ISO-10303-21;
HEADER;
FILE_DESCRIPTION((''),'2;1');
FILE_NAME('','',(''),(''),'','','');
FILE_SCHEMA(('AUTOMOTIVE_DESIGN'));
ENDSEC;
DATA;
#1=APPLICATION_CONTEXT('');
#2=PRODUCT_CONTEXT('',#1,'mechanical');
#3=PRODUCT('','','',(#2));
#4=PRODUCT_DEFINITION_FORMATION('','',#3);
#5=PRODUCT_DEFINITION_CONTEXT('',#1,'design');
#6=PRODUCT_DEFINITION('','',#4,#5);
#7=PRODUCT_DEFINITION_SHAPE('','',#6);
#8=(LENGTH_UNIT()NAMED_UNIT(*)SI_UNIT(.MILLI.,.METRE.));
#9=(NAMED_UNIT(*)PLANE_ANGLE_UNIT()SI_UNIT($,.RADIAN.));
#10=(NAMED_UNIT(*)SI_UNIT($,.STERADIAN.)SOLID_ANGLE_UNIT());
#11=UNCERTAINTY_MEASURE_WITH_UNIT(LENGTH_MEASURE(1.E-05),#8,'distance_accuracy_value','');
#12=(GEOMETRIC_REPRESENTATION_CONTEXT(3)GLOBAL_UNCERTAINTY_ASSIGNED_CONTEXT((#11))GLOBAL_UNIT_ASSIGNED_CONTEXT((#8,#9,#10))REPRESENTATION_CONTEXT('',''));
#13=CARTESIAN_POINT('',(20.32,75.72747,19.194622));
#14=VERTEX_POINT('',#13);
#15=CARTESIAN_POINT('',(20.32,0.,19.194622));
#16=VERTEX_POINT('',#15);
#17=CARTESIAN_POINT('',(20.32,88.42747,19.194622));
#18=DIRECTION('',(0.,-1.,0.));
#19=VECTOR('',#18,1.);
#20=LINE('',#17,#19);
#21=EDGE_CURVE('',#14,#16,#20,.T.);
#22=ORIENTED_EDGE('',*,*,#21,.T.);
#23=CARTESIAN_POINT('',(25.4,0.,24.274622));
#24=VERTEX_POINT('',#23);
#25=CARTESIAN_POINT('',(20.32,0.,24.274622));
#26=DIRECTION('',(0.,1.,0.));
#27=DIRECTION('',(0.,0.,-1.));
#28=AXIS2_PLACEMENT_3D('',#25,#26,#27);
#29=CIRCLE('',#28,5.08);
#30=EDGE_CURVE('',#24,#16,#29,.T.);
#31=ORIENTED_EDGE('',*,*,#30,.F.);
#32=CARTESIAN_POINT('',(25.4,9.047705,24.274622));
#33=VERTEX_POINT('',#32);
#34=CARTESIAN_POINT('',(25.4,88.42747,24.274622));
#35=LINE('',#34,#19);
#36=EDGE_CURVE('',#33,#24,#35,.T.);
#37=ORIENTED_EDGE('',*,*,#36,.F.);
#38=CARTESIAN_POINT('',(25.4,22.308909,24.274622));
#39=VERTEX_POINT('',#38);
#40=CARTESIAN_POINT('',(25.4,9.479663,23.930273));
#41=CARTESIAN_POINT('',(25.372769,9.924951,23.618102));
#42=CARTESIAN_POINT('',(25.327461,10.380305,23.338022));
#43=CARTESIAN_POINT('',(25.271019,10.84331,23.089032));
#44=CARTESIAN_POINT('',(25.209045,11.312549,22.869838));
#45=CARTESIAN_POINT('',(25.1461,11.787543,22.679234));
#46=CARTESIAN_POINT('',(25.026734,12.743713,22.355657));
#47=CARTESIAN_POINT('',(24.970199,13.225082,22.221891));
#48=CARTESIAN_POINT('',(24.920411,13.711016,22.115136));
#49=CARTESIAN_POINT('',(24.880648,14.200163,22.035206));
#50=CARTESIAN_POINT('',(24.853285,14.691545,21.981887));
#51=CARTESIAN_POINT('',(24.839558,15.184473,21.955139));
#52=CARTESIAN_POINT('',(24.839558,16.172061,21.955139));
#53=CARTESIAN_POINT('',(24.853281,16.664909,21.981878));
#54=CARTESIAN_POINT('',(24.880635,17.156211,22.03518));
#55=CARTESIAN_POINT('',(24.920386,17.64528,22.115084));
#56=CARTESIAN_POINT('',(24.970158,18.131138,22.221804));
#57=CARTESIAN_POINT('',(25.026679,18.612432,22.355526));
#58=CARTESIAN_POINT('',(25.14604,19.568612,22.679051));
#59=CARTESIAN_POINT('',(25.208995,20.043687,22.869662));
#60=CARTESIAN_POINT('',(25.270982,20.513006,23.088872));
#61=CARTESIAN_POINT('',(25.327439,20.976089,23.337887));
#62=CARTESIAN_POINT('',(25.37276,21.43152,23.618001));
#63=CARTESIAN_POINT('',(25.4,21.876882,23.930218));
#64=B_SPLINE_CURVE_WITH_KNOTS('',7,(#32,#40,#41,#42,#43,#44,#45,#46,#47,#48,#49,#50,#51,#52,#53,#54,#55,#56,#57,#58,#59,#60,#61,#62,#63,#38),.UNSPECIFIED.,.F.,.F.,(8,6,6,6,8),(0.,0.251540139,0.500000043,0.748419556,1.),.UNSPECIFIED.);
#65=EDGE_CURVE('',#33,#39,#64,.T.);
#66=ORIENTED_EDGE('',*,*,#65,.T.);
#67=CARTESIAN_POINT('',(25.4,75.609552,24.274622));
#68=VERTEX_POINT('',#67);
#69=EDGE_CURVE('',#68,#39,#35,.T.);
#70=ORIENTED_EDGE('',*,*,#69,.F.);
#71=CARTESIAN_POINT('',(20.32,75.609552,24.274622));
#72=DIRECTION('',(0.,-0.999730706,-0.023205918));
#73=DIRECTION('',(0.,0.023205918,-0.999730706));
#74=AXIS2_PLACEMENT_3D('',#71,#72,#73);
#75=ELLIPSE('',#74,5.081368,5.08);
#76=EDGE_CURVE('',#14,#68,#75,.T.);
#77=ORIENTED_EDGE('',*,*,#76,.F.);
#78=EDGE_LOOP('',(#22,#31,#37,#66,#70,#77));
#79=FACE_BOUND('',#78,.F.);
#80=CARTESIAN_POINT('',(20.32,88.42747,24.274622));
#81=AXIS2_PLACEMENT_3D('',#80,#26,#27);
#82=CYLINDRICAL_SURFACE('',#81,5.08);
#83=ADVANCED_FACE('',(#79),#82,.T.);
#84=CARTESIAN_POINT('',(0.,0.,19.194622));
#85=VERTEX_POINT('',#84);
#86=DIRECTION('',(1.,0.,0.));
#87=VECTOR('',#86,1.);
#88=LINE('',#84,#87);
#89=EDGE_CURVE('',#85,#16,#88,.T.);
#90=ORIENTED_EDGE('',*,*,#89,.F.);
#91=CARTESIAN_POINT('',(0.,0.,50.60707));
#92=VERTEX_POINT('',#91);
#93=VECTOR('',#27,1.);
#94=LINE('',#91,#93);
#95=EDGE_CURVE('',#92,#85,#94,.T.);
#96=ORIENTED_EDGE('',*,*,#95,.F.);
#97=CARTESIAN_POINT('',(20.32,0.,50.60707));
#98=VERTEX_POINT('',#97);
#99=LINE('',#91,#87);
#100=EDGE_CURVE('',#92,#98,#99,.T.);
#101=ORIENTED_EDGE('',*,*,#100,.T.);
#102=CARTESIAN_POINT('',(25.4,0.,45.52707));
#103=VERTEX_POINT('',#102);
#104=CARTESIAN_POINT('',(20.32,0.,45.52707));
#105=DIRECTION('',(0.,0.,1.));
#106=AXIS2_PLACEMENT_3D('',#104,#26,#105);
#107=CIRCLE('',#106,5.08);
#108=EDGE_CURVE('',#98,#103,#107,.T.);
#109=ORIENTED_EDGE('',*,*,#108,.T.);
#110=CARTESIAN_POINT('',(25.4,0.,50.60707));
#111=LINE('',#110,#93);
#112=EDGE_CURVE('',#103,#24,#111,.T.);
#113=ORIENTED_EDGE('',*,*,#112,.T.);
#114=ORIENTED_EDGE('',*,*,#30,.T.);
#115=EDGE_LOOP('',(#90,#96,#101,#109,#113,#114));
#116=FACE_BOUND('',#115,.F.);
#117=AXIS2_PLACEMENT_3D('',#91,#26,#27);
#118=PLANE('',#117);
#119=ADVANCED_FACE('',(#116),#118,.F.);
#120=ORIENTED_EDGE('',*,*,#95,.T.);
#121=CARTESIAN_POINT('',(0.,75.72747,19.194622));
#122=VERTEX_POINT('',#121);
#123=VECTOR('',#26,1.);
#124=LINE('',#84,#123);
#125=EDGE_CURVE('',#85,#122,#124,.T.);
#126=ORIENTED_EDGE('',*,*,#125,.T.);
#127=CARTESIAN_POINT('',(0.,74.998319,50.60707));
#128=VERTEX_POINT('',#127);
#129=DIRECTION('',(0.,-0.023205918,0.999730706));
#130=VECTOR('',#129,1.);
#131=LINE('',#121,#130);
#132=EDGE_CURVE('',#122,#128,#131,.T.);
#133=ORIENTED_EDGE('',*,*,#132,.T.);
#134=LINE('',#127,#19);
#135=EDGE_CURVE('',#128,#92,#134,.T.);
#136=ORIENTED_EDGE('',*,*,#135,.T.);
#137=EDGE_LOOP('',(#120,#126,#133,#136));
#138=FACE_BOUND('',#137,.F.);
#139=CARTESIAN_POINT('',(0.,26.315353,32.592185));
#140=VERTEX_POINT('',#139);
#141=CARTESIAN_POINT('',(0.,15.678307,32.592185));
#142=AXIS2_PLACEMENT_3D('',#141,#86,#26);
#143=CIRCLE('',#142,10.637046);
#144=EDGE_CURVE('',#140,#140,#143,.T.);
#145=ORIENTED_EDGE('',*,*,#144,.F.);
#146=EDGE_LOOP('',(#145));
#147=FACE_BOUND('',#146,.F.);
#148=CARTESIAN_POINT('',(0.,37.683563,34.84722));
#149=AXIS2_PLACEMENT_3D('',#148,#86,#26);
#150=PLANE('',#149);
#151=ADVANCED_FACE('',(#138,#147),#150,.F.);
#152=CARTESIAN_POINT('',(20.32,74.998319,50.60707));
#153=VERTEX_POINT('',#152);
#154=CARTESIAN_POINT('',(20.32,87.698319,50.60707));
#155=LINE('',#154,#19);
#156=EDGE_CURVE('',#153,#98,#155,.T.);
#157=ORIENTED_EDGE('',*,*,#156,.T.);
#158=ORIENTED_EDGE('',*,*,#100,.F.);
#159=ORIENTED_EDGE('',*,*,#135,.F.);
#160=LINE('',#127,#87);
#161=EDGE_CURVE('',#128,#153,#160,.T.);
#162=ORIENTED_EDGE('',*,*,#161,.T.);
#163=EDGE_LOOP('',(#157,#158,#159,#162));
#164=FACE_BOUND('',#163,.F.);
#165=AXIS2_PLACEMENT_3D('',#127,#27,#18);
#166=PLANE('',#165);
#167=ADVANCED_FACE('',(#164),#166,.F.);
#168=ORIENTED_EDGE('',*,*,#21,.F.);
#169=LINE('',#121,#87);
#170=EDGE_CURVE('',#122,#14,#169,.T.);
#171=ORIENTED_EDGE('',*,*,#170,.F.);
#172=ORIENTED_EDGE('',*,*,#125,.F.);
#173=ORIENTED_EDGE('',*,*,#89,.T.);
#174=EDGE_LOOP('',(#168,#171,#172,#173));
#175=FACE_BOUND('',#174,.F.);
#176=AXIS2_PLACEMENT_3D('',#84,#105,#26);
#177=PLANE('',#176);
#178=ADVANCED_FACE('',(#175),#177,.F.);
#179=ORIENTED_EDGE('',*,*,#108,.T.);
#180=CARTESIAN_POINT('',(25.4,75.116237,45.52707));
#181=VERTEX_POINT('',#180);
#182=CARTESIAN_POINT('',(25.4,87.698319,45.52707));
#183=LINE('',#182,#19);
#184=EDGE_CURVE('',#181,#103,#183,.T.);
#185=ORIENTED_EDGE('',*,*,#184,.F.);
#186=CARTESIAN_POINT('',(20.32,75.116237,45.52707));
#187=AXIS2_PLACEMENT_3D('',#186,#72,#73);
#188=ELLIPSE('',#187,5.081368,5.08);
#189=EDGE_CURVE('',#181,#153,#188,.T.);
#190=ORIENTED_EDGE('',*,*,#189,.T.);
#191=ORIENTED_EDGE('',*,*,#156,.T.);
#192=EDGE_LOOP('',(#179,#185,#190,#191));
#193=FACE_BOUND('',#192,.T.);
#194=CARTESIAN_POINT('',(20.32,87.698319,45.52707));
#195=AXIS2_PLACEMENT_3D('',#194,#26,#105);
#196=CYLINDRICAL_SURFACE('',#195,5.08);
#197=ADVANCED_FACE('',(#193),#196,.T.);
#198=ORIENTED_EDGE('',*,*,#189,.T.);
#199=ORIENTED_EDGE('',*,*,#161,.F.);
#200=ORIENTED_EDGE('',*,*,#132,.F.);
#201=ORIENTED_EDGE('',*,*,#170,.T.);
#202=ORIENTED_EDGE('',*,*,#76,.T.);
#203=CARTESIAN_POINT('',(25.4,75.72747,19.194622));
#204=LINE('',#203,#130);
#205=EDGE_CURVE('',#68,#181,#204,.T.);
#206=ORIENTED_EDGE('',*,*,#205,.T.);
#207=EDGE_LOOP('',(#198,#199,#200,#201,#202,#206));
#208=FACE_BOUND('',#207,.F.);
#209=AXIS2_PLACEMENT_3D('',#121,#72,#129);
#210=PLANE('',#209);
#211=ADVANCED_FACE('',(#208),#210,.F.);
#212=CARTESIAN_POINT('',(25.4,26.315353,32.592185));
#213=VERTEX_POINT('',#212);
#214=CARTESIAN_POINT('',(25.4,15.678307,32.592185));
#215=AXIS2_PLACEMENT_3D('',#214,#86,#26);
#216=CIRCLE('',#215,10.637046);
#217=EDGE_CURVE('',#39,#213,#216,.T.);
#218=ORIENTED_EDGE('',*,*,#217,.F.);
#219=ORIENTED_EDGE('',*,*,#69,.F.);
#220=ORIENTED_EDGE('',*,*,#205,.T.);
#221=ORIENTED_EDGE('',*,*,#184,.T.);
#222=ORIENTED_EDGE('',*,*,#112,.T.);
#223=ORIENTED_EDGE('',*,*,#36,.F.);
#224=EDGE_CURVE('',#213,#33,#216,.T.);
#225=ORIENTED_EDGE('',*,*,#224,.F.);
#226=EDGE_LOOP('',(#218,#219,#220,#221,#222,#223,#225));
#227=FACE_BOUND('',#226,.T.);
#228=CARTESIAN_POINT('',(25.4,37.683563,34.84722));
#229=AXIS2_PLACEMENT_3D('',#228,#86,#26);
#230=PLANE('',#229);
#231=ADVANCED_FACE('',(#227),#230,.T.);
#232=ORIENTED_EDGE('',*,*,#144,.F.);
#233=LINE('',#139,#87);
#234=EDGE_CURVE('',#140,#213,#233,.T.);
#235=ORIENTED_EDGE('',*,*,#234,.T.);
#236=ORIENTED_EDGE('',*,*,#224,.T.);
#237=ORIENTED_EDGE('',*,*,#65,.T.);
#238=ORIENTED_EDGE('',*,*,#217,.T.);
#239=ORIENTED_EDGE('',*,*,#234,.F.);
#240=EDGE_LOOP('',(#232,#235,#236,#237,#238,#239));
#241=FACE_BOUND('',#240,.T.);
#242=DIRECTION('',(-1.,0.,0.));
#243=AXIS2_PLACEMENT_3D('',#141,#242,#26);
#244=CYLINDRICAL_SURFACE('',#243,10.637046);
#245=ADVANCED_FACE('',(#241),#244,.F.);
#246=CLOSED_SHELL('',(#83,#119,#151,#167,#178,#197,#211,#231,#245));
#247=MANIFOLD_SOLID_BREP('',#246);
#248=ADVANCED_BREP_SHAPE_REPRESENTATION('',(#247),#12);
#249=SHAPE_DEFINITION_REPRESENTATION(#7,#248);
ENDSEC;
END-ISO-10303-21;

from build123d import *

# Parameters (mm, degrees)
F1_R        = 10.6370455912
F2_DEPTH    = 25.4
F3_T1_DEPTH = 100.398319149
F3_T3_DEPTH = 101.1274702191


# Not quite as in the source:
# - a fillet or chamfer that OpenCascade refuses, or shapes differently, is made with other operations: its cross-section is extruded or revolved along the edge and cut away or added


with BuildPart() as f2:
    # F1 (on face) → F2 (new body)
    with BuildSketch(Plane.YZ):
        Polygon((0, 19.1946215928), (75.7274702191, 19.1946215928), (74.998319149, 50.6070703268), (0, 50.6070703268), align=None)
        with Locations((15.6783070415, 32.5921848416)):
            Circle(F1_R, mode=Mode.SUBTRACT)
    extrude(amount=F2_DEPTH)

    # F3: fillet of radius 5.08 on 2 edges, made by hand

    # F3_s2 → F3_t1 (cut)
    with BuildSketch(Plane.XZ.offset(-87.698319149)):
        with BuildLine():
            ThreePointArc((20.32, 50.6070703268), (23.9121024484, 49.1191727752), (25.4, 45.5270703268))
            Line((25.4, 45.5270703268), (25.4, 50.6070703268))
            Line((25.4, 50.6070703268), (20.32, 50.6070703268))
        make_face()
    extrude(amount=F3_T1_DEPTH, mode=Mode.SUBTRACT)

    # F3_s4 → F3_t3 (cut)
    with BuildSketch(Plane.XZ.offset(-88.4274702191)):
        with BuildLine():
            ThreePointArc((20.32, 19.1946215928), (23.9121024484, 20.6825191443), (25.4, 24.2746215928))
            Line((25.4, 24.2746215928), (25.4, 19.1946215928))
            Line((25.4, 19.1946215928), (20.32, 19.1946215928))
        make_face()
    extrude(amount=F3_T3_DEPTH, mode=Mode.SUBTRACT)


solid = f2.part
